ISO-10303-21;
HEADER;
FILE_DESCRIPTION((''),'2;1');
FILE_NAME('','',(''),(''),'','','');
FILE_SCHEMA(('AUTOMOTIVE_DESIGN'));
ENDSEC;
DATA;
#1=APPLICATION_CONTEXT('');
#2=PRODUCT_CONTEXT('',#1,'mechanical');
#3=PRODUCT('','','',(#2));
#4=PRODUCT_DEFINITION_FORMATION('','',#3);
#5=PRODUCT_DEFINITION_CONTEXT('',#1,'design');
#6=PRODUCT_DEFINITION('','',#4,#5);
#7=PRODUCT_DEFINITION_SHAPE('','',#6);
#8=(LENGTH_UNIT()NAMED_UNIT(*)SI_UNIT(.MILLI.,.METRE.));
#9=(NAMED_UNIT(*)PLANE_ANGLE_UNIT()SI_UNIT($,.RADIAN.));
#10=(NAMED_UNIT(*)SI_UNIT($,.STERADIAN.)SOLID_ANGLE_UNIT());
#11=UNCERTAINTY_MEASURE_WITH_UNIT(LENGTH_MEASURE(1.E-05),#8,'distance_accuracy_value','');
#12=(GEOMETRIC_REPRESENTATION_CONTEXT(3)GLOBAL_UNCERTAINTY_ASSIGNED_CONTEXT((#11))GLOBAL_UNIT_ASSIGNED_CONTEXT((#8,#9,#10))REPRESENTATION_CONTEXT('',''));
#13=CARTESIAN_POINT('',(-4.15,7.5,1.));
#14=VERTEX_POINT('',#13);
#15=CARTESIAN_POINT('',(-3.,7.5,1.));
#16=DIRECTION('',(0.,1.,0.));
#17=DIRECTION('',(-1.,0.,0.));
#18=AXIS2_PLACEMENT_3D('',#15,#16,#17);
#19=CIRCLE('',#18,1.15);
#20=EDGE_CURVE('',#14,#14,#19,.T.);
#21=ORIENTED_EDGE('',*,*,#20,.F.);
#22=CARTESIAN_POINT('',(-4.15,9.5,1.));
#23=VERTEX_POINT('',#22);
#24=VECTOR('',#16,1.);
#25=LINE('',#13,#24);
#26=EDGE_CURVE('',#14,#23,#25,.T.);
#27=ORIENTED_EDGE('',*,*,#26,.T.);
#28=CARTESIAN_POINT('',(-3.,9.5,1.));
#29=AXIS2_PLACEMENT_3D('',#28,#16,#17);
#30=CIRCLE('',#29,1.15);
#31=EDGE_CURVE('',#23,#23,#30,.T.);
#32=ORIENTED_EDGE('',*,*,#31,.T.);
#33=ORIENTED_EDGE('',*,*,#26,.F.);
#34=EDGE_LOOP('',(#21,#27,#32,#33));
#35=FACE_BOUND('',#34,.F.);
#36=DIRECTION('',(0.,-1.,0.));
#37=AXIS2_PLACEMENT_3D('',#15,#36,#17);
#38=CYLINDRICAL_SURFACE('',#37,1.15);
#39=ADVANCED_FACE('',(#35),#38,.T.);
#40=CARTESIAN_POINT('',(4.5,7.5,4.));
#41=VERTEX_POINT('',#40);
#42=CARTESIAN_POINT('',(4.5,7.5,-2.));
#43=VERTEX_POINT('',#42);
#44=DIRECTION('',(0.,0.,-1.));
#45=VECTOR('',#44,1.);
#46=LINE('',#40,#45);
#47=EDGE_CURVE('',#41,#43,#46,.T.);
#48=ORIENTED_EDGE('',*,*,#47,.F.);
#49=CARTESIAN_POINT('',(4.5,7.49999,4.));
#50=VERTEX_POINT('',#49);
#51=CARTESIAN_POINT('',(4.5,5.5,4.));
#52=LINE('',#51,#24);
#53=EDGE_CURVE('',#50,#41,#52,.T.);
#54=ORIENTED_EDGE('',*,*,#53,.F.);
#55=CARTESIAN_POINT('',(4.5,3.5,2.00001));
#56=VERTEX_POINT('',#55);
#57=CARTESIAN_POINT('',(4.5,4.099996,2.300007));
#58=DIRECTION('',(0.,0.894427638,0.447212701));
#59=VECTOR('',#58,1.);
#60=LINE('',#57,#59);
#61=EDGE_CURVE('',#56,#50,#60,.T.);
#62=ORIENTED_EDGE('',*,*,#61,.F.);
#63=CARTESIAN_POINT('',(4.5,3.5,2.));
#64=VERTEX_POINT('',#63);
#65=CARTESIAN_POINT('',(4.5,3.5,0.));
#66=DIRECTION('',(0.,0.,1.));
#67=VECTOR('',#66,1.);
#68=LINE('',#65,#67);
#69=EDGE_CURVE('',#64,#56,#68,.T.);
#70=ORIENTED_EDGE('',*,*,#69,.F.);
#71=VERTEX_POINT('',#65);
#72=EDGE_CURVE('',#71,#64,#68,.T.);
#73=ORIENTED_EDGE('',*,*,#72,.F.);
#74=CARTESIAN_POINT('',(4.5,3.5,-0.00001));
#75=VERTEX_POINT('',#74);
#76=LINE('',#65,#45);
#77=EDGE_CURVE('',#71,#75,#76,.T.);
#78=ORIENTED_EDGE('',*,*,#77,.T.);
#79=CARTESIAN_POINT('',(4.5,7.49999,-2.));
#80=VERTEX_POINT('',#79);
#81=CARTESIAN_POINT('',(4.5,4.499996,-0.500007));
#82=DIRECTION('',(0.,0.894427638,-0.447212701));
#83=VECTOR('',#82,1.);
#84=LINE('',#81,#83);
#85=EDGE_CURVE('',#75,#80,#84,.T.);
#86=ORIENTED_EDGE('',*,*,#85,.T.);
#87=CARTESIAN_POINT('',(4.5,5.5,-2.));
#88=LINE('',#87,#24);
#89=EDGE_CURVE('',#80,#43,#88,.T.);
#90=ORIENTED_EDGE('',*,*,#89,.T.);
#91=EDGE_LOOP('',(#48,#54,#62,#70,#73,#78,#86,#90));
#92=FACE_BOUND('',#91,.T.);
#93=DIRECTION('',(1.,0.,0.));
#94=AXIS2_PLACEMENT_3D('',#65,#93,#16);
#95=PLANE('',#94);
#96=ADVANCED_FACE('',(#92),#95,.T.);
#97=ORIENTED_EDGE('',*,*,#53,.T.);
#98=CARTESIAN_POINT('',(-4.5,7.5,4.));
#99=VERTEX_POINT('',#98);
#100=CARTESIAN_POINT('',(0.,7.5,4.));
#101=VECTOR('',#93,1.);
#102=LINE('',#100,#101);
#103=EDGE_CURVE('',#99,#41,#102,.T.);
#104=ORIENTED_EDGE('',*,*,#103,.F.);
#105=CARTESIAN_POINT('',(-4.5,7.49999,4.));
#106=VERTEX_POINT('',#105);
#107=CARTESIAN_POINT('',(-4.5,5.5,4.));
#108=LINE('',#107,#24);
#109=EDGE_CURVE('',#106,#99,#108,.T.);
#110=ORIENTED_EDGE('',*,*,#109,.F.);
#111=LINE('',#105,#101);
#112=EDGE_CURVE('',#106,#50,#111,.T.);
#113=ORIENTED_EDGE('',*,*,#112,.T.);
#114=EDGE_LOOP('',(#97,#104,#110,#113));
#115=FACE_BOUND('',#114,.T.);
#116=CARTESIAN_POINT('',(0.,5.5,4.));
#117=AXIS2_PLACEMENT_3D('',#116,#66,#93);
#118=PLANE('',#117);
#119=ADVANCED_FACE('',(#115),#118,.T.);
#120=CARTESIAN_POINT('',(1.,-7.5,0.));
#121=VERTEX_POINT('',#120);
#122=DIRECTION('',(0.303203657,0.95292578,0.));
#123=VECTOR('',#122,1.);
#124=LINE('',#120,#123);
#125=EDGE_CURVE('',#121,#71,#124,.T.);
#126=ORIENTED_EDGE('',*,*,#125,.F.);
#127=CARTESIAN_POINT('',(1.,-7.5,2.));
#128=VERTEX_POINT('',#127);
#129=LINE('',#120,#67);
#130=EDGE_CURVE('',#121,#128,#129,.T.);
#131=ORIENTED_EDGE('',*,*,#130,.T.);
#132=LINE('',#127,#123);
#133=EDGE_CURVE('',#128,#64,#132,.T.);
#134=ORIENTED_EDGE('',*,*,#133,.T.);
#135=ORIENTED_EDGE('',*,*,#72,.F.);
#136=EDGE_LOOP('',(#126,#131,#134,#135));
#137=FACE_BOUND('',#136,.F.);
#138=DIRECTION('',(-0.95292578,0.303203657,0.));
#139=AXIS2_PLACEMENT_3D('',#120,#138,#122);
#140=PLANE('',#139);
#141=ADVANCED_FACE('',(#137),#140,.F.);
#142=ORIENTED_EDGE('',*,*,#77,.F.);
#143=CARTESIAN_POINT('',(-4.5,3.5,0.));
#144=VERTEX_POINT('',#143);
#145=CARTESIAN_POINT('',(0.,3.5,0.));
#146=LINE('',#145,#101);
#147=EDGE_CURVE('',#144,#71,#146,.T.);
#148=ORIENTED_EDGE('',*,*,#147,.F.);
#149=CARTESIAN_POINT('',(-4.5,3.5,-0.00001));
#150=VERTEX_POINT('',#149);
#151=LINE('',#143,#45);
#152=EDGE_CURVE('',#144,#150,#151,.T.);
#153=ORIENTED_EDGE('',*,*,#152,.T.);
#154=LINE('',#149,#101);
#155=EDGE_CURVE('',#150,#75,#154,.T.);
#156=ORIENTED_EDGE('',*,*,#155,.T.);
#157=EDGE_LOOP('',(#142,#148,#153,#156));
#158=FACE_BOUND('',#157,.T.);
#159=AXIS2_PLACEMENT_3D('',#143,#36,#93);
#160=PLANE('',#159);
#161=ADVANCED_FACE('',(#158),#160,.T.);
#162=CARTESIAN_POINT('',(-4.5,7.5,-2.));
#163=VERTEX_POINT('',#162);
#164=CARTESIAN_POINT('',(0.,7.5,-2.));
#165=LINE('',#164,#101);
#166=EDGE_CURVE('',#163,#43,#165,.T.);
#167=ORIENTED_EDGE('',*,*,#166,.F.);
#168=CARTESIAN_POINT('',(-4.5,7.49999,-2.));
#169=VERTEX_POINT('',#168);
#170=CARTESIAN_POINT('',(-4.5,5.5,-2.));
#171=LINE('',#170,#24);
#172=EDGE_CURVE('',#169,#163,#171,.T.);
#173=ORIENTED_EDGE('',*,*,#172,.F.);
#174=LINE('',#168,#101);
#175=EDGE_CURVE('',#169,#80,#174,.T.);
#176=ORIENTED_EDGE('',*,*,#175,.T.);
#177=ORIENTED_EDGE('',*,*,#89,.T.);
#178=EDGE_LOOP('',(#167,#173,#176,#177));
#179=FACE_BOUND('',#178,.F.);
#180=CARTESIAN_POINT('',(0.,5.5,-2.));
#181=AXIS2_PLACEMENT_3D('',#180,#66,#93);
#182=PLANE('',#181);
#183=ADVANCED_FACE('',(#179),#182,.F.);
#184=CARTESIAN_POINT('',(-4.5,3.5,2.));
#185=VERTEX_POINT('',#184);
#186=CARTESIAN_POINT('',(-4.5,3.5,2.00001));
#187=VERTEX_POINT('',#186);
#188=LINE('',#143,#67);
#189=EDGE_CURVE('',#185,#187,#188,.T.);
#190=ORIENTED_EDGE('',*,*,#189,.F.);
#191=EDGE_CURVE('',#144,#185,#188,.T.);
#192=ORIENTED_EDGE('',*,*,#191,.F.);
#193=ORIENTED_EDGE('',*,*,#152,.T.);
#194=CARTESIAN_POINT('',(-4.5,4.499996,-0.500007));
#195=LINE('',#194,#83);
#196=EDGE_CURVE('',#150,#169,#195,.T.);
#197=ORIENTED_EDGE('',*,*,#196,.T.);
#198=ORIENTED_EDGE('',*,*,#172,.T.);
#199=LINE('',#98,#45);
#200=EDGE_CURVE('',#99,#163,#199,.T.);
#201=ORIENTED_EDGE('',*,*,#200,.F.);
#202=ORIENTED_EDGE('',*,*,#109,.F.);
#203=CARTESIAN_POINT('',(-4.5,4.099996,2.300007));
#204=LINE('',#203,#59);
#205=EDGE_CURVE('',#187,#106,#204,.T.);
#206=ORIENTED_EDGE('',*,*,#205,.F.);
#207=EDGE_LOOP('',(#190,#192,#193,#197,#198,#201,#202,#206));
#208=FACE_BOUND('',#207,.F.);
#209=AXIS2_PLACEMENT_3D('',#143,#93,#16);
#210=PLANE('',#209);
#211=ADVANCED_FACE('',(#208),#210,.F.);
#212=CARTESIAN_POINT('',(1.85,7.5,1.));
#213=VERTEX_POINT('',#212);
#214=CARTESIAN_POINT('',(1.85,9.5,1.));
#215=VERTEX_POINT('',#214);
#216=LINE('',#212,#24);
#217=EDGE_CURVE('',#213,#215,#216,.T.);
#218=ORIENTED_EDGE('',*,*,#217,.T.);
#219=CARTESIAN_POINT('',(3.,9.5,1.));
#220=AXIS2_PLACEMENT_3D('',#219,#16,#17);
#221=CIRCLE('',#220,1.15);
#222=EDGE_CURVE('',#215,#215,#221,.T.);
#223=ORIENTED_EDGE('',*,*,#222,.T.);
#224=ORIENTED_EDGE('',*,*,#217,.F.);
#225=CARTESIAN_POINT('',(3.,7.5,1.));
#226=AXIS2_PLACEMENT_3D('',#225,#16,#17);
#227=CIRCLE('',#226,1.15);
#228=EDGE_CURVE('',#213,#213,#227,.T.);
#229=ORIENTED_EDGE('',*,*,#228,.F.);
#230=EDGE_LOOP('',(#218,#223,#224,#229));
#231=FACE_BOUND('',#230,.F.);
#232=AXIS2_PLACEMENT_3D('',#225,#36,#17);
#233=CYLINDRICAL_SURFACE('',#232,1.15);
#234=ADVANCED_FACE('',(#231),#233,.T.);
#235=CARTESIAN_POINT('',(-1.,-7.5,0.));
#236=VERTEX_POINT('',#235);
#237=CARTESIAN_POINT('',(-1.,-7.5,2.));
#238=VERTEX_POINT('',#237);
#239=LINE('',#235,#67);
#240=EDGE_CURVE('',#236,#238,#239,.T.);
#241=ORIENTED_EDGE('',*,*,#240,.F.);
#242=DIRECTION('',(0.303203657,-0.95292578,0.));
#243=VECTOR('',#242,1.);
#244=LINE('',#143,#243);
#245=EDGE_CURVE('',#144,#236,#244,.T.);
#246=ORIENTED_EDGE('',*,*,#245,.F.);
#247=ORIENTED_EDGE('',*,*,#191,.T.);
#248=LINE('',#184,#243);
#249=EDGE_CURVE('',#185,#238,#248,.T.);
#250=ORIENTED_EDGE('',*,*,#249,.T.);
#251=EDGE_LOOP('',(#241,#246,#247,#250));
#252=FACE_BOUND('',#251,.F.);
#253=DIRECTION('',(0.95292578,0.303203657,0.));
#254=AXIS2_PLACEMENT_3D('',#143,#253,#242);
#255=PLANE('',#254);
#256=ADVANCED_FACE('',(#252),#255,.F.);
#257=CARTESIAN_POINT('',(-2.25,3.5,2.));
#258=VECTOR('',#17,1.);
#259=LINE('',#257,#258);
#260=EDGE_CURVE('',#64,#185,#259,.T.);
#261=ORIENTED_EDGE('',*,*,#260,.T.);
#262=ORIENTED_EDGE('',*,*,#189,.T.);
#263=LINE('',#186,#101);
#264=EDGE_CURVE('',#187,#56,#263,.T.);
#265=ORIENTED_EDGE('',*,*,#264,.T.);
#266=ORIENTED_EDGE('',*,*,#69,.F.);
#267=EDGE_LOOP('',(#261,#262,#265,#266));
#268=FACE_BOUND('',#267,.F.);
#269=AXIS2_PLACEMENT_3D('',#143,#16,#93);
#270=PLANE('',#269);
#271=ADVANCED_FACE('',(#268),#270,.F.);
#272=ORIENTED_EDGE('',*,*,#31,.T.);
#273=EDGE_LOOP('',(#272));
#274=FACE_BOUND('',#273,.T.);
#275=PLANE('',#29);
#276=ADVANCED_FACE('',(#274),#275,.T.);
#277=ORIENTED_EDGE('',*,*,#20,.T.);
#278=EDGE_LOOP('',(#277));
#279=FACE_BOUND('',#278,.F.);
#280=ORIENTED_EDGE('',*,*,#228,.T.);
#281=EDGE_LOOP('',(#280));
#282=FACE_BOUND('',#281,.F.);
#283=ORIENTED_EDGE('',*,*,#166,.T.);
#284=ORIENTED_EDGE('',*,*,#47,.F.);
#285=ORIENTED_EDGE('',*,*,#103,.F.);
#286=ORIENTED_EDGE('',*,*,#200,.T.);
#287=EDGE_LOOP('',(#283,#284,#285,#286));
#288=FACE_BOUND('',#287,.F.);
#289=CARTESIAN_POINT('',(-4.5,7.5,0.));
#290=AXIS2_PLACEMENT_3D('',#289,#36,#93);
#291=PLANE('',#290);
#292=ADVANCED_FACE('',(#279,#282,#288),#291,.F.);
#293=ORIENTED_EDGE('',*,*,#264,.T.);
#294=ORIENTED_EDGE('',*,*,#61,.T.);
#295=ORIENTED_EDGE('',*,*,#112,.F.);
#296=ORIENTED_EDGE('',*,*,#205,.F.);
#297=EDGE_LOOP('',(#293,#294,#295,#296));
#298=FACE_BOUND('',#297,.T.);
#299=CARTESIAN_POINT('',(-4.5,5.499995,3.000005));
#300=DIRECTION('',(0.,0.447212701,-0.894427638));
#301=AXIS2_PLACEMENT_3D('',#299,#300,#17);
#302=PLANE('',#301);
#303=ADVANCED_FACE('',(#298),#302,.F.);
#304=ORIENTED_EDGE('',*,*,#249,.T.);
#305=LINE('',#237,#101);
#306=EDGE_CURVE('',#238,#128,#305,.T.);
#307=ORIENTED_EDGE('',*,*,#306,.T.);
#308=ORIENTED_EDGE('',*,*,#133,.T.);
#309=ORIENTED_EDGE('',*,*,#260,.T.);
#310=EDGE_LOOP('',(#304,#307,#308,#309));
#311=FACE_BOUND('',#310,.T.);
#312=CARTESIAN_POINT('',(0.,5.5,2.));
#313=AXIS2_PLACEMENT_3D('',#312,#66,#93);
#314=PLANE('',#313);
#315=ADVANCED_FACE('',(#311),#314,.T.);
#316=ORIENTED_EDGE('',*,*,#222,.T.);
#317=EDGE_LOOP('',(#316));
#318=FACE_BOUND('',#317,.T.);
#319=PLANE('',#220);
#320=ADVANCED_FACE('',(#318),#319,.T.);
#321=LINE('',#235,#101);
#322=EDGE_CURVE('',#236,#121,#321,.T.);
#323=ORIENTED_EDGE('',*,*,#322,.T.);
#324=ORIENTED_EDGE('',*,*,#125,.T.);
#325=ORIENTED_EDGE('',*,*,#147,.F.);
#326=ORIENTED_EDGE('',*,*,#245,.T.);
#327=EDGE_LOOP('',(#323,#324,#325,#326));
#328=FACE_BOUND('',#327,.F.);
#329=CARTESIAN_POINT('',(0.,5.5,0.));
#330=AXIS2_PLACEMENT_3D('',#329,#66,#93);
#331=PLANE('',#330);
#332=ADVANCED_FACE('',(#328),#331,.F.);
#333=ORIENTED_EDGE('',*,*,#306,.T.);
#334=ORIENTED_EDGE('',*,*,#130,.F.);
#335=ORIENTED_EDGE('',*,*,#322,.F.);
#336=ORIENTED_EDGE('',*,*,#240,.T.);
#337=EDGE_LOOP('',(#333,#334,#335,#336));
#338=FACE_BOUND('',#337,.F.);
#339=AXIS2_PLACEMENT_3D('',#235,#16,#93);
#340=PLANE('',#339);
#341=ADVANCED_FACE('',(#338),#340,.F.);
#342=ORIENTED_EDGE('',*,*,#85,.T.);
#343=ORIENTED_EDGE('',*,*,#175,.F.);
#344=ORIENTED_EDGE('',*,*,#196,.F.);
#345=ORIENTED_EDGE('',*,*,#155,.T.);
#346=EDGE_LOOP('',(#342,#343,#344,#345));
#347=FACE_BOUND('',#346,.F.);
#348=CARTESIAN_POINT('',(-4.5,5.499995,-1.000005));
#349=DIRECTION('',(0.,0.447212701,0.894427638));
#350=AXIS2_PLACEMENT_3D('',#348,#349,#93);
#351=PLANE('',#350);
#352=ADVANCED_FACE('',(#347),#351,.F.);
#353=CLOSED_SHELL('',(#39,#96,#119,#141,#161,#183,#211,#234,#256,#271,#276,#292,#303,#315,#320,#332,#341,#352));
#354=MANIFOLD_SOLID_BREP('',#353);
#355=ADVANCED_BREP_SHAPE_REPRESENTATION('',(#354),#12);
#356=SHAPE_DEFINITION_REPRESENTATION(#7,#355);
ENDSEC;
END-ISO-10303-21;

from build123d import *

# Parameters (mm, degrees)
F0_W          = 9
F0_H          = 4
F1_DEPTH      = 2
F2_DEPTH      = 4
F2_DEPTH_BACK = 2
F3_SIZE2      = 3.99999
F3_SIZE       = 1.99999
F4_SIZE2      = 3.99999
F4_SIZE       = 1.99999
F5_R          = 1.15
F6_DEPTH      = 2


# Not quite as in the source:
# - a fillet or chamfer is up to 0.001 mm smaller than in the source, because OpenCascade refuses the exact size


with BuildPart() as f1:
    # F0 (on Top) → F1 (new body)
    with BuildSketch(Plane.XY):
        with Locations((0, 5.5)):
            Rectangle(F0_W, F0_H)
        Polygon((1, -7.5), (4.5, 3.5), (-4.5, 3.5), (-1, -7.5), align=None)
    extrude(amount=F1_DEPTH)

    # F0 (on Top) → F2 (join, two sides)
    with BuildSketch(Plane.XY) as f2_sk:
        with Locations((0, 5.5)):
            Rectangle(F0_W, F0_H)
    extrude(amount=F2_DEPTH)
    extrude(f2_sk.sketch, amount=-F2_DEPTH_BACK)

    # F3 (size 2 and 4 in the source; OpenCascade refuses exactly that, so slightly less here)
    f3_edges = [f1.edges().sort_by_distance(p)[0] for p in [
        (0, 3.5, -2),
    ]]
    f3_side = f1.faces().sort_by_distance((0, 3.5, -1))[0]
    chamfer(f3_edges, length=F3_SIZE, length2=F3_SIZE2, reference=f3_side)

    # F4 (size 2 and 4 in the source; OpenCascade refuses exactly that, so slightly less here)
    f4_edges = [f1.edges().sort_by_distance(p)[0] for p in [
        (0, 3.5, 4),
    ]]
    f4_side = f1.faces().sort_by_distance((0, 3.5, 3))[0]
    chamfer(f4_edges, length=F4_SIZE, length2=F4_SIZE2, reference=f4_side)

    # F5 (on face) → F6 (join)
    with BuildSketch(Plane(origin=(0, 7.5, 0), x_dir=(-1, 0, 0), z_dir=(0, 1, 0))):
        with Locations((-3, 1)):
            Circle(F5_R)
        with Locations((3, 1)):
            Circle(F5_R)
    extrude(amount=F6_DEPTH)


solid = f1.part
